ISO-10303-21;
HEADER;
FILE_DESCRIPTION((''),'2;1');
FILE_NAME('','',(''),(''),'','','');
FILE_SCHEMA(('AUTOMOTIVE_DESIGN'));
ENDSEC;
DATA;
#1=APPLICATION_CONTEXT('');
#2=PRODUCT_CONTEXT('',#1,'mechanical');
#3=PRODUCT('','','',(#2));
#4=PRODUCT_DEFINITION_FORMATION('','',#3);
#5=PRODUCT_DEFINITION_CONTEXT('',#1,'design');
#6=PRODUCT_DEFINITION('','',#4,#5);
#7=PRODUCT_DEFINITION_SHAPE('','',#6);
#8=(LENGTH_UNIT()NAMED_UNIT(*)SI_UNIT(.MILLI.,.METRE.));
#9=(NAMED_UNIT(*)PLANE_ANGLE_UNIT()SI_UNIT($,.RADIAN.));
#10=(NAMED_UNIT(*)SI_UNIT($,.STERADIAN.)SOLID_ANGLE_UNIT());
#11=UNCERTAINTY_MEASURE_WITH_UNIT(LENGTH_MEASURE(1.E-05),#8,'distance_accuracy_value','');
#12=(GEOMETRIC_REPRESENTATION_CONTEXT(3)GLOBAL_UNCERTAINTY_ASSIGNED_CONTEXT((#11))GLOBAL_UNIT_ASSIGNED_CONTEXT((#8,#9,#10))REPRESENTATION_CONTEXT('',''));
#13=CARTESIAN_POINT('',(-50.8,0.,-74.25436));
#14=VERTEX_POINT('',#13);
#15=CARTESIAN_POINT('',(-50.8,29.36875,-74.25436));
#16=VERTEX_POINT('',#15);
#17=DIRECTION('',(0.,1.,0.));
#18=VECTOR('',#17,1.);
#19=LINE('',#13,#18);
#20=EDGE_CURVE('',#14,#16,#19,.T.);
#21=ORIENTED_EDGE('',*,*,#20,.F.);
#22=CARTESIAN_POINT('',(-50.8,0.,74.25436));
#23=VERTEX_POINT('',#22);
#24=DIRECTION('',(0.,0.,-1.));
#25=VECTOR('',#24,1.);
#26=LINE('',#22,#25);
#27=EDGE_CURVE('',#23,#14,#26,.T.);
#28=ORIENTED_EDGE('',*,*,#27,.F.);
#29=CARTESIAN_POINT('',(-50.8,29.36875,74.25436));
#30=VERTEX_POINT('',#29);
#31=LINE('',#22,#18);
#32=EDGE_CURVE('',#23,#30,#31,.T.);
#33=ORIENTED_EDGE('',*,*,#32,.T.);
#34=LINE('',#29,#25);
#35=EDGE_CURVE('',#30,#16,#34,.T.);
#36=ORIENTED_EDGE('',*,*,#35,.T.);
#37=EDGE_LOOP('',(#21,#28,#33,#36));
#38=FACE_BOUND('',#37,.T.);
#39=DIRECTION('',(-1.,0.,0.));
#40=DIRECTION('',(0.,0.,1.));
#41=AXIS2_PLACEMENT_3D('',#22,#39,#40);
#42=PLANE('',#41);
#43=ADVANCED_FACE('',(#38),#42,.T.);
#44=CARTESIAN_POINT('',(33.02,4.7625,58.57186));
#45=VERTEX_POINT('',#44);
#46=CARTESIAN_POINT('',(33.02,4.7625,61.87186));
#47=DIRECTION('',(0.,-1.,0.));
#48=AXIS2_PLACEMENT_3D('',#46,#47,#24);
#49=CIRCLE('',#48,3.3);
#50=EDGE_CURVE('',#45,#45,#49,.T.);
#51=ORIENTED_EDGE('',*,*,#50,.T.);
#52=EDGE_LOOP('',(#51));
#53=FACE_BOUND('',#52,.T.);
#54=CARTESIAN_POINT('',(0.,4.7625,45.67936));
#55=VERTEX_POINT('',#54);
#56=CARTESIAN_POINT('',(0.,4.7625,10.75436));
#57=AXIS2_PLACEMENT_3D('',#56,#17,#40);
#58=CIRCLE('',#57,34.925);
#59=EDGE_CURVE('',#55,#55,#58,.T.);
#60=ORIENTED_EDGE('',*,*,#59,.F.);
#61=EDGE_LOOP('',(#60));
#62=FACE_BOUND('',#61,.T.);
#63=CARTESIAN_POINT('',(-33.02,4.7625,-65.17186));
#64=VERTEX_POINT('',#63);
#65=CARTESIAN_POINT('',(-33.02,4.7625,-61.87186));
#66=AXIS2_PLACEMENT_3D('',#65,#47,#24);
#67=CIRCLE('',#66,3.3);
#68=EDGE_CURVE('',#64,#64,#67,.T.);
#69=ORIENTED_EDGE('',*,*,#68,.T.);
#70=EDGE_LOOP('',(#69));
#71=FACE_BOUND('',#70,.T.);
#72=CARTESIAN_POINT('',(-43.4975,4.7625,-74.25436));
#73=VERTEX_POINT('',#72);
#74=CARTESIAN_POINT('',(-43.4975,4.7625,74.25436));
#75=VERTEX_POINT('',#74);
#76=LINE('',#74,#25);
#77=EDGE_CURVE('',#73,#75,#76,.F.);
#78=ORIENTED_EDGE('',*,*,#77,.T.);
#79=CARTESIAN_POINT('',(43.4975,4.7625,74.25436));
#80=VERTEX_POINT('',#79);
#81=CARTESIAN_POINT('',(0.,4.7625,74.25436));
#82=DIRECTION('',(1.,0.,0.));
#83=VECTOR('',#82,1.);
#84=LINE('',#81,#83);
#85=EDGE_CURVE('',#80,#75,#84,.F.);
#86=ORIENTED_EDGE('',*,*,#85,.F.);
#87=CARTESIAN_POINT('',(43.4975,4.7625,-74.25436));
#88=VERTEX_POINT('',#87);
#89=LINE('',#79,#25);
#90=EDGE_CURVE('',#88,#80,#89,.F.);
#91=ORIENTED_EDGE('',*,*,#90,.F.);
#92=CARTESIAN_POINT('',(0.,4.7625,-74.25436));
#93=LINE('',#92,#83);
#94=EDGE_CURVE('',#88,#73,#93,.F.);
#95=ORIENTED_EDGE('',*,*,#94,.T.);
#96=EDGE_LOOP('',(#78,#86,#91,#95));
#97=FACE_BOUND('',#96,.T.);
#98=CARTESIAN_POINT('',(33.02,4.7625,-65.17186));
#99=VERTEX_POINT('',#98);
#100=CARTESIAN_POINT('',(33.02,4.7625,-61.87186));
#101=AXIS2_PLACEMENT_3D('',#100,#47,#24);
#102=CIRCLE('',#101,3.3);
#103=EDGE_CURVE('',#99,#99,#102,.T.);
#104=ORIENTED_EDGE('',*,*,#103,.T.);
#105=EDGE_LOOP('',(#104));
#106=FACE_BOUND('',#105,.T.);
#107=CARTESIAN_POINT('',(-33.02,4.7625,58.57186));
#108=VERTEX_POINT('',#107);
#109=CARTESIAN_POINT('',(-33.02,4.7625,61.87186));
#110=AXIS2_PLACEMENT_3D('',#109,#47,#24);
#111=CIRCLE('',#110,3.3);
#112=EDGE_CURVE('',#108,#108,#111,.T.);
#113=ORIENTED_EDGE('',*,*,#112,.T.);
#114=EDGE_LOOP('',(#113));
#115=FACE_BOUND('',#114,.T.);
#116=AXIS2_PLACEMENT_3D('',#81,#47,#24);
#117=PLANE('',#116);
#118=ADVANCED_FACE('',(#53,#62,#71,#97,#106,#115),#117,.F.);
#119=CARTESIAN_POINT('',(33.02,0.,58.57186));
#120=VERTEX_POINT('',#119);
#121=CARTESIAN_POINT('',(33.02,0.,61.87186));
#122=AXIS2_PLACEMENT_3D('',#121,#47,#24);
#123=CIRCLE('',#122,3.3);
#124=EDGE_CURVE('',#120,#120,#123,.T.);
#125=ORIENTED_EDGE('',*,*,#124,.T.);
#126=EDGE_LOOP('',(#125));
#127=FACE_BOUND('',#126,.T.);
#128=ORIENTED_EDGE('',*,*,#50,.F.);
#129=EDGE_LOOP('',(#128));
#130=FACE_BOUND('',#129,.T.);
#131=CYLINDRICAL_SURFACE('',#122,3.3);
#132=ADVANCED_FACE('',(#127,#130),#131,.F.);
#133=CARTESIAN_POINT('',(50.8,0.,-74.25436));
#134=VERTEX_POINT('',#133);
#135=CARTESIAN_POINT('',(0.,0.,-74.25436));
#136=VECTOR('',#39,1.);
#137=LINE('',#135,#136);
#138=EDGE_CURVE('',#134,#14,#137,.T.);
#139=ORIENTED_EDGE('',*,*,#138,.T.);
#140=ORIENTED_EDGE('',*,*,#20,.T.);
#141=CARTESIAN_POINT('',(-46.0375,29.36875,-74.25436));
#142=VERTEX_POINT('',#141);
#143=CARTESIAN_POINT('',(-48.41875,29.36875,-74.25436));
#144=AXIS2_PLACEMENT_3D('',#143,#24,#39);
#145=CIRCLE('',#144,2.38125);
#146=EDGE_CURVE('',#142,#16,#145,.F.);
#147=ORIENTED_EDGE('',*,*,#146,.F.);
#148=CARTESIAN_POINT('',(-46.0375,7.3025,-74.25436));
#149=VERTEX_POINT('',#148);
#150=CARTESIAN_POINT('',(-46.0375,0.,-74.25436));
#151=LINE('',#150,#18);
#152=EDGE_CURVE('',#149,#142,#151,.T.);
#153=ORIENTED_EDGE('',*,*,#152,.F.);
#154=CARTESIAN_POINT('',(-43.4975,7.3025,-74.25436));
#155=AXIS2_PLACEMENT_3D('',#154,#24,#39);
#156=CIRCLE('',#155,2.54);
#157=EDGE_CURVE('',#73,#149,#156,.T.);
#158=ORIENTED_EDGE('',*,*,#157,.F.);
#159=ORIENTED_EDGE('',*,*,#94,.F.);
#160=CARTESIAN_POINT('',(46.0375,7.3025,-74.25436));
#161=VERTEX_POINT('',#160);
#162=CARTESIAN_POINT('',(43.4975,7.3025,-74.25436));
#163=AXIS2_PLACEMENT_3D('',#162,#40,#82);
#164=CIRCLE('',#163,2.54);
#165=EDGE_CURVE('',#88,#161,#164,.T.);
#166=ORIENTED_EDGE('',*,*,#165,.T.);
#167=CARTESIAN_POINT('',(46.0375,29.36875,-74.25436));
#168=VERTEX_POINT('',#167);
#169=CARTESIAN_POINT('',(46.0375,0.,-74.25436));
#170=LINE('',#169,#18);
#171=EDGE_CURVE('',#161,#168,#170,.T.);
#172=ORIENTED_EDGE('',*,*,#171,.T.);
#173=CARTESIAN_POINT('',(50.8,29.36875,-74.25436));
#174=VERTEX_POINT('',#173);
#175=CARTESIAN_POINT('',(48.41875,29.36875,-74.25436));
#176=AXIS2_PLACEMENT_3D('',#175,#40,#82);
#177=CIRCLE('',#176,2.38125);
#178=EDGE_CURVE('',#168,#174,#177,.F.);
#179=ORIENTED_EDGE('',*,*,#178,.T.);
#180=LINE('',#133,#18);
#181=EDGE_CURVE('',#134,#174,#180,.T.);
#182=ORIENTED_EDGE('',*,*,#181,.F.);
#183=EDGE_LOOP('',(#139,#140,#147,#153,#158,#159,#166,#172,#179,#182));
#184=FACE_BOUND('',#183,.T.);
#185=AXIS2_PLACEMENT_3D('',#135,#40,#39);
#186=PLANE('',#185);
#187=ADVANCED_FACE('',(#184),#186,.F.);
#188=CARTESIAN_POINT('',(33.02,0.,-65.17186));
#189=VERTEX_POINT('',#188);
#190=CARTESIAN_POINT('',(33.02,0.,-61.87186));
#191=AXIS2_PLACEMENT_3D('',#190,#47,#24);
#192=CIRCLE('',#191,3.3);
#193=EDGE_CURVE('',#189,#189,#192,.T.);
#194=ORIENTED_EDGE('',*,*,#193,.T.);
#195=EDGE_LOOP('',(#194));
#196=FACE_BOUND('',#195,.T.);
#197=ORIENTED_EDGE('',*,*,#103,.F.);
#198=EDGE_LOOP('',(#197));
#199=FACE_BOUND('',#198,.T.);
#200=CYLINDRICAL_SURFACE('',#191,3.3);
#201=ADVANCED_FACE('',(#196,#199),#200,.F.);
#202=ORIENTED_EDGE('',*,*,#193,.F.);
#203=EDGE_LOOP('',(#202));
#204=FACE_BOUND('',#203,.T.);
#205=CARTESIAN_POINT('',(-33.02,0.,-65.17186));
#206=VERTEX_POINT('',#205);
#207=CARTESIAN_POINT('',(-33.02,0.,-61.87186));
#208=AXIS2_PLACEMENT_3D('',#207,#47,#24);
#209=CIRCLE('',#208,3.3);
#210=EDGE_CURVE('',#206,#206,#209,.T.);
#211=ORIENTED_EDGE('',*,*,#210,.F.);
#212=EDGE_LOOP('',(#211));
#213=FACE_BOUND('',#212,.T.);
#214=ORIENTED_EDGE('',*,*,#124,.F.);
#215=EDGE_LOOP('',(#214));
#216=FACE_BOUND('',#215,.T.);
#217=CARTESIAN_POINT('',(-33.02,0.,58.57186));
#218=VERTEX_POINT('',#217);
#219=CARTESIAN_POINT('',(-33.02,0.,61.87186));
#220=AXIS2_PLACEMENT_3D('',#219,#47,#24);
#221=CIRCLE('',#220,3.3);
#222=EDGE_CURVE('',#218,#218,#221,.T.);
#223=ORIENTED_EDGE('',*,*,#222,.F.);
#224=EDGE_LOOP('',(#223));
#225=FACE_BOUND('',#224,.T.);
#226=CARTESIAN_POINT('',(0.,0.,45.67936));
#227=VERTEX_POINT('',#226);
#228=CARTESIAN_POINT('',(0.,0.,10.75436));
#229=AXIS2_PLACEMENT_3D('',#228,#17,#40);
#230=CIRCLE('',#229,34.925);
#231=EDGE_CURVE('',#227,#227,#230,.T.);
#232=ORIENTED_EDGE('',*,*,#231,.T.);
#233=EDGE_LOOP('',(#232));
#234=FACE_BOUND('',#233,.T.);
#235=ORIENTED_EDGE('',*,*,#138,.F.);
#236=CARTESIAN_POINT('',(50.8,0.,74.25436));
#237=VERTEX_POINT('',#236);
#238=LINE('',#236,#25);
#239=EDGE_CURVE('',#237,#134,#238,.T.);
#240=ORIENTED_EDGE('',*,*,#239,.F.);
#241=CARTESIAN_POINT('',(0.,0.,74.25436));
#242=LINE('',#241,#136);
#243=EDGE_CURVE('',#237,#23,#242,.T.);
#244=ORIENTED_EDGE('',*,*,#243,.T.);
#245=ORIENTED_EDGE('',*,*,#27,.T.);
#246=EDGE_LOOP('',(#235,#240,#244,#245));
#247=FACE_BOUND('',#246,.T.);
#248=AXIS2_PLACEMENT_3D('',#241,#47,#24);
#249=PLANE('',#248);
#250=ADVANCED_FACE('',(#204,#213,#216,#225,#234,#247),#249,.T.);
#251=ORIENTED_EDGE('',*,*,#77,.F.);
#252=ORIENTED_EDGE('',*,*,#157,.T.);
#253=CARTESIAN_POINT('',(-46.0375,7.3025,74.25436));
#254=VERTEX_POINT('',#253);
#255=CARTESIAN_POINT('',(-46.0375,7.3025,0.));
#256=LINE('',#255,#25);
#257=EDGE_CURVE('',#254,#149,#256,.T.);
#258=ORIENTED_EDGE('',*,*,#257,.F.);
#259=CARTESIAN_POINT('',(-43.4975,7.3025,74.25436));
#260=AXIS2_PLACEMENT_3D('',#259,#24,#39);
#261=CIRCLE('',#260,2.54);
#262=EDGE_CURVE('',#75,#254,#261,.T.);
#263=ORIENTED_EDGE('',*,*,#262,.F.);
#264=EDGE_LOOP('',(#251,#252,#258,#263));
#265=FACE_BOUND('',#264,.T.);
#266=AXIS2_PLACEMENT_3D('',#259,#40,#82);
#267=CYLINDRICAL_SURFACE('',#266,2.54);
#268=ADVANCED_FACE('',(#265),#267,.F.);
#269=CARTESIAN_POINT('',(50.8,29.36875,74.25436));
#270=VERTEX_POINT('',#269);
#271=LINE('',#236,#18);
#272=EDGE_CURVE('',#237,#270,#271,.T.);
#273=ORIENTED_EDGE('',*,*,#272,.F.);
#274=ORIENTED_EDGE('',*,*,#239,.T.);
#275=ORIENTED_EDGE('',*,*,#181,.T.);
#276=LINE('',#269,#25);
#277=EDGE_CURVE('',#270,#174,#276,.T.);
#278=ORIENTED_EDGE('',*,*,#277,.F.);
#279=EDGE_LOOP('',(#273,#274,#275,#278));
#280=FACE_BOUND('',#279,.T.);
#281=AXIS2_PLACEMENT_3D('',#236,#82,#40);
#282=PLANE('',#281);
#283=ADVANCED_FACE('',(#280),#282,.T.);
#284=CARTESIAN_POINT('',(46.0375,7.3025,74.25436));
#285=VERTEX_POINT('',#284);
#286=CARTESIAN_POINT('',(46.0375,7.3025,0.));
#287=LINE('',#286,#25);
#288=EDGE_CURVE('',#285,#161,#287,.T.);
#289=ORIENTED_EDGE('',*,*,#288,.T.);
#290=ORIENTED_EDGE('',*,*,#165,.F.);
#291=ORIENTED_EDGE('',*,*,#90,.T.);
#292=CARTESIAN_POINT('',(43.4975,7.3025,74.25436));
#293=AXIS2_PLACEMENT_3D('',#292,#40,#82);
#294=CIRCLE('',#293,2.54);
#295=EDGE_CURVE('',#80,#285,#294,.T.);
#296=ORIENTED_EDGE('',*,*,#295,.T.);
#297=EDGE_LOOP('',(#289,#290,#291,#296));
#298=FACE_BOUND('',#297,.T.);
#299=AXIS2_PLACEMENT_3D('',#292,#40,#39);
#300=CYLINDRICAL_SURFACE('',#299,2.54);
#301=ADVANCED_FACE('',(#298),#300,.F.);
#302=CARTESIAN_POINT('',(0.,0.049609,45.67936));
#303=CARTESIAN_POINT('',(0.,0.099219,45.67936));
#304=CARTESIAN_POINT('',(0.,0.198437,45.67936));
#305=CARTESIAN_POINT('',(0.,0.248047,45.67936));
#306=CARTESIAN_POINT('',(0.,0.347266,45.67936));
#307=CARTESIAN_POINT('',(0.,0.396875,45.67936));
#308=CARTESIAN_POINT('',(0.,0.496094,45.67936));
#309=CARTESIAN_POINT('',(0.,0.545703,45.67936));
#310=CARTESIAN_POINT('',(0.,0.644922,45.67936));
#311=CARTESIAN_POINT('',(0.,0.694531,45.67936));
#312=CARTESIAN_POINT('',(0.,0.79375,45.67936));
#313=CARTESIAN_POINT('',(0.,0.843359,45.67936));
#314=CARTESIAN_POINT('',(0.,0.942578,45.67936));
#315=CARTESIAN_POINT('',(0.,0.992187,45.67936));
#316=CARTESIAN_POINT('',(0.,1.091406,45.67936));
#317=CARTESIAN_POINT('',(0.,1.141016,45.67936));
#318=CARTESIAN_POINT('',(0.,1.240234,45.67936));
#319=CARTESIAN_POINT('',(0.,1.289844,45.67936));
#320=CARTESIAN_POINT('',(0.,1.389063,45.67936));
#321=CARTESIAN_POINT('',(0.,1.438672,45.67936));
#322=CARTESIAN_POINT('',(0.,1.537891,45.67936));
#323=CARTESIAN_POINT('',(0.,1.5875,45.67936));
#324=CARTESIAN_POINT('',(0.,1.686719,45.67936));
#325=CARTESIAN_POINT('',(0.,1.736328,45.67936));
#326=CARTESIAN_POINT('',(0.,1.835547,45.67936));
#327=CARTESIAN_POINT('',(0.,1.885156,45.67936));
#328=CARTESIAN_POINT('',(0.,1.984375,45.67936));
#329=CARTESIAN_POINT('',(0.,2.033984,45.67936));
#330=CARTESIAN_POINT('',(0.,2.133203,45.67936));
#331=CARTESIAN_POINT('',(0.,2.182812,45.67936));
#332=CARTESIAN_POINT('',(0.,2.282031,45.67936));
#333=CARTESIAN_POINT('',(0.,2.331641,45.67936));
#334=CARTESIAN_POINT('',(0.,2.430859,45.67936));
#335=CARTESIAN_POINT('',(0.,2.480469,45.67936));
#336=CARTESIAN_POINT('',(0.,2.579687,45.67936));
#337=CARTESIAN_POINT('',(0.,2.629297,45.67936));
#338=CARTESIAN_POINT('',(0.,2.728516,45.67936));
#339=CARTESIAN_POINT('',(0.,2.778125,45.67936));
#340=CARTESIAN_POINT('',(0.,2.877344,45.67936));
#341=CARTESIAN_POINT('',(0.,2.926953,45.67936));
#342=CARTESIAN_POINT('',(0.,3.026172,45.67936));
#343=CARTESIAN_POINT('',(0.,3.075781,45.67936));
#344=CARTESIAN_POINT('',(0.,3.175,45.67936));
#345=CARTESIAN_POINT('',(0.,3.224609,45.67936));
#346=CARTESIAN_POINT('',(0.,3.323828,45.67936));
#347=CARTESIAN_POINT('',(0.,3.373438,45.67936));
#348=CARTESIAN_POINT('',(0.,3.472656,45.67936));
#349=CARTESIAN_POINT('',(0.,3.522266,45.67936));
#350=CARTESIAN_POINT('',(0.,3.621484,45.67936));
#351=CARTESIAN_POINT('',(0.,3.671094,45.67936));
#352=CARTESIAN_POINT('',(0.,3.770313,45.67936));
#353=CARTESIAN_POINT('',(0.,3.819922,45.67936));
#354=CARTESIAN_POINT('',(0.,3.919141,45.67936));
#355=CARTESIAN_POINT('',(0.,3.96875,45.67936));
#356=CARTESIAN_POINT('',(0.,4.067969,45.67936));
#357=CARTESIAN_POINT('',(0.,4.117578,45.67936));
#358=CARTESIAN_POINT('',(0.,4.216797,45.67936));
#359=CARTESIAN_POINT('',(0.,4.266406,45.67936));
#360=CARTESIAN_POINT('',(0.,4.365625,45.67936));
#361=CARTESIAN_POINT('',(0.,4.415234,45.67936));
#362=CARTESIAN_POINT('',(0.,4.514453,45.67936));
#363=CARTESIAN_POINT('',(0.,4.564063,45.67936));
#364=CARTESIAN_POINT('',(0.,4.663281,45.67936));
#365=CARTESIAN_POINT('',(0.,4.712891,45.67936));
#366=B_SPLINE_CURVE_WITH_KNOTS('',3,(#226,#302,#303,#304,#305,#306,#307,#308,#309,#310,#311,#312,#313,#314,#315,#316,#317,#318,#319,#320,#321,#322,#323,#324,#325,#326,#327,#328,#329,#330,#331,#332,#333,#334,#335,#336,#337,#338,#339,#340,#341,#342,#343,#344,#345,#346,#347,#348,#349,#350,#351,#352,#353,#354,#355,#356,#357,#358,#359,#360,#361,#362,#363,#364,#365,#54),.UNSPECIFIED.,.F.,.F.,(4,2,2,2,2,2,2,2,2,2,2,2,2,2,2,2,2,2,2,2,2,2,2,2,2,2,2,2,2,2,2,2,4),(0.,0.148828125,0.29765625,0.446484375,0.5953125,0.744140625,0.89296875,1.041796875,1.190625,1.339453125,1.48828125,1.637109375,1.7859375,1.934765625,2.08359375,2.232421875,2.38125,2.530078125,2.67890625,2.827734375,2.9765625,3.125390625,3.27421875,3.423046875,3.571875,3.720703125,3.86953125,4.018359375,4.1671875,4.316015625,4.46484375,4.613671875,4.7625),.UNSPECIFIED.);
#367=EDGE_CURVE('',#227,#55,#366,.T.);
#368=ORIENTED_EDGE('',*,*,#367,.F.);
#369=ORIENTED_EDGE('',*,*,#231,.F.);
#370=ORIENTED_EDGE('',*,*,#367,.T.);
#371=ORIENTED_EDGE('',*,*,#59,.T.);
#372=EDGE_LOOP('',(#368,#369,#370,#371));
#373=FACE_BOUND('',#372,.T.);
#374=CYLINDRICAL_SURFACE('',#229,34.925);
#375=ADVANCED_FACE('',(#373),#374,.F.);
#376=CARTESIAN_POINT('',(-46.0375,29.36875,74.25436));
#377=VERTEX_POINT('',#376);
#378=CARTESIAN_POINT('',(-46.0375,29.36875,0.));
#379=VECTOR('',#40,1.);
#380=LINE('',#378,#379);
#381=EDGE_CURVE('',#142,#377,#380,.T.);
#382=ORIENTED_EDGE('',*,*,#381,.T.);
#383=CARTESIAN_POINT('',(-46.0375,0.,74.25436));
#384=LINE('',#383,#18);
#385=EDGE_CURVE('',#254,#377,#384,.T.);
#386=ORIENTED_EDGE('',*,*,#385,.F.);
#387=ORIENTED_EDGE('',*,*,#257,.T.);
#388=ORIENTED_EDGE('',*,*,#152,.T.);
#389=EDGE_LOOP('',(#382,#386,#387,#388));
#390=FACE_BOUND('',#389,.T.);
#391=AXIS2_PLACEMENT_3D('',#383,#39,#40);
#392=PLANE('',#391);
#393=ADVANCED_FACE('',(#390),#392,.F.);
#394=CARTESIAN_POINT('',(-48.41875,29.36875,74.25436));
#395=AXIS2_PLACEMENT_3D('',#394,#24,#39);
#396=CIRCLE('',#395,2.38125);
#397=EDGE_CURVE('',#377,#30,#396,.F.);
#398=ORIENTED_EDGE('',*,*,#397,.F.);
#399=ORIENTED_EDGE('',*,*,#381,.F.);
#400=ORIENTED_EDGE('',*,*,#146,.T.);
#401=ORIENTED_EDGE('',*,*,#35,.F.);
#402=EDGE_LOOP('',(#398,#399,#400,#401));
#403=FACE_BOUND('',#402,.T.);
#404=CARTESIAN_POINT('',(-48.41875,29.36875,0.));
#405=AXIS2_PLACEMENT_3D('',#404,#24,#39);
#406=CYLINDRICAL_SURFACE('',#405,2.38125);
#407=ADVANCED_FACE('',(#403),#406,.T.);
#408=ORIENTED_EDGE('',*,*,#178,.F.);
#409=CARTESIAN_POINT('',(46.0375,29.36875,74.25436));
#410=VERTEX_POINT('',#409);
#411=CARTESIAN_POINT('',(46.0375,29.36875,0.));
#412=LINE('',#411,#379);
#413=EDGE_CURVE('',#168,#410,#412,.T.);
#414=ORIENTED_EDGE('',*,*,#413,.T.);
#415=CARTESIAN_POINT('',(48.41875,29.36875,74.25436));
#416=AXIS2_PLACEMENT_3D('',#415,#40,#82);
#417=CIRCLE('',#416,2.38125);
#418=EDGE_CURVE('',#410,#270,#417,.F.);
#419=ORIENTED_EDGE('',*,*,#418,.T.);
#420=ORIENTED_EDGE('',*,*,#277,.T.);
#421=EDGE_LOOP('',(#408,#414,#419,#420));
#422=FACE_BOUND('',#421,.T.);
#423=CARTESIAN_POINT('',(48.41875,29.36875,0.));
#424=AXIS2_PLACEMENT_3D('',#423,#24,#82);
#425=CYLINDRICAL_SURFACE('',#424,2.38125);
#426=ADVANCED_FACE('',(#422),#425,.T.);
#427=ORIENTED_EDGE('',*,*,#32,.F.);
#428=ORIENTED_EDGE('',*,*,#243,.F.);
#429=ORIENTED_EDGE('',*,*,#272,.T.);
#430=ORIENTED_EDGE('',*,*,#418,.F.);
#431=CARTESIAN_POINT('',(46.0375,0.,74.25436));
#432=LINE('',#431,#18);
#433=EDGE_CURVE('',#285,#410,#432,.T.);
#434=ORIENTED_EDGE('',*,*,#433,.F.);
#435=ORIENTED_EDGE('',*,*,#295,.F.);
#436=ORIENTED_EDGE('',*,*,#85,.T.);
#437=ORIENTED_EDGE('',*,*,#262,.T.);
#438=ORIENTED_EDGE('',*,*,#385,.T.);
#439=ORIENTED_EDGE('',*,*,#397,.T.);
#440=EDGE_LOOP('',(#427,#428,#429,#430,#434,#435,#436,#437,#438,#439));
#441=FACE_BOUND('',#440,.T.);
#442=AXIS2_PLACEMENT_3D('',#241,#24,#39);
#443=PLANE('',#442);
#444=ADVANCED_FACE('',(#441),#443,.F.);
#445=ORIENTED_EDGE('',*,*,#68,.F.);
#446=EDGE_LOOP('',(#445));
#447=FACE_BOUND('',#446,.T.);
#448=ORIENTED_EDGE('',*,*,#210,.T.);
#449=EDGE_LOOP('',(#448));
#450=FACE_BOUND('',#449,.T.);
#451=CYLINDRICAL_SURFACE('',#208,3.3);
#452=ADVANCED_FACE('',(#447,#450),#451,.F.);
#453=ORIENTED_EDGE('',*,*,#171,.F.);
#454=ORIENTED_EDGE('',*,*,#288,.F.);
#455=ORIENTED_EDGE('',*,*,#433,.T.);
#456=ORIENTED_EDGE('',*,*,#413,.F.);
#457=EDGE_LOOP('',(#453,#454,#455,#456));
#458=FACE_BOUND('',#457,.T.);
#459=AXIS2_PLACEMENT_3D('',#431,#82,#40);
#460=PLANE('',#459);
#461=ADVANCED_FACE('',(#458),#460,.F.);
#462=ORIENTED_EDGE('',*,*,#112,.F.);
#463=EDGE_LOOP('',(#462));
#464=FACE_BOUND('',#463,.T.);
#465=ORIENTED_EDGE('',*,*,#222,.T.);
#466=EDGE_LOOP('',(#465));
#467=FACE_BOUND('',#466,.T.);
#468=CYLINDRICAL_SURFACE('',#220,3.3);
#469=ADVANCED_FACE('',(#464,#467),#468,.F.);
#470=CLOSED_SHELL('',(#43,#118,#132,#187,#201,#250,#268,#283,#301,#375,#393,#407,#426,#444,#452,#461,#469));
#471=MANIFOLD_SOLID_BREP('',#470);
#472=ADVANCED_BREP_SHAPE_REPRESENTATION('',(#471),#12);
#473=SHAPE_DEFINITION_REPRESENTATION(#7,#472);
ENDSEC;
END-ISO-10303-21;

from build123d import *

# Parameters (mm, degrees)
EXTRUDE_THIN1_DEPTH  = 74.25436
FILLET1_RADIUS       = 2.38125
FILLET1_LENGTH       = 74.25436
FILLET2_R            = 2.54
MIRROR1_START        = -74.25436
MIRROR1_DEPTH        = 148.50872
M6_CLEARANCE_HOLE1_D = 6.6
SKETCH11_R           = 34.925
CUT_EXTRUDE4_DEPTH   = 94.929096319


# Read off the part's stored shape, not the designer's step: Mirror1
with BuildPart() as part:
    # Sketch4 → Extrude-Thin1 (new body)
    with BuildSketch(Plane.XY):
        Polygon((0, 0), (-50.8, 0), (-50.8, 31.75), (-46.0375, 31.75), (-46.0375, 4.7625), (0, 4.7625), align=None)
    extrude(amount=EXTRUDE_THIN1_DEPTH)

    # Fillet1: full round fillet: the end face becomes a half cylinder, R = half its width
    fillet1_face = Plane((-48.41875, 31.75, 37.12718), x_dir=(0, 0, -1), z_dir=(0, 1, 0))  # on the end face: x along it, z out of the body
    fillet1_slab = fillet1_face.offset(-FILLET1_RADIUS / 2) * Box(FILLET1_LENGTH, 2 * FILLET1_RADIUS, FILLET1_RADIUS, mode=Mode.PRIVATE)  # the body's end, R deep
    fillet1_round = Plane((-48.41875, 29.36875, 37.12718), x_dir=(0, 1, 0), z_dir=(0, 0, -1)) * Cylinder(FILLET1_RADIUS, FILLET1_LENGTH, mode=Mode.PRIVATE)  # its axis R under the face
    add(fillet1_slab - fillet1_round, mode=Mode.SUBTRACT)

    # Fillet2
    fillet2_edges = [part.edges().sort_by_distance(p)[0] for p in [
        (-46.0375, 4.7625, 37.12718),
    ]]
    fillet(fillet2_edges, radius=FILLET2_R)

    # Mirror1 outline → Mirror1 (add)
    with BuildSketch(Plane.XY.offset(MIRROR1_START)):
        with BuildLine():
            ThreePointArc((-46.0375, 29.36875), (-48.41875, 31.75), (-50.8, 29.36875))
            Line((-50.8, 29.36875), (-50.8, 0))
            Line((-50.8, 0), (50.8, 0))
            Line((50.8, 0), (50.8, 29.36875))
            ThreePointArc((50.8, 29.36875), (48.41875, 31.75), (46.0375, 29.36875))
            Line((46.0375, 29.36875), (46.0375, 7.3025))
            ThreePointArc((46.0375, 7.3025), (45.293551224, 5.506448776), (43.4975, 4.7625))
            Line((43.4975, 4.7625), (-43.4975, 4.7625))
            ThreePointArc((-43.4975, 4.7625), (-45.293551224, 5.506448776), (-46.0375, 7.3025))
            Line((-46.0375, 7.3025), (-46.0375, 29.36875))
        make_face()
    extrude(amount=MIRROR1_DEPTH)

    # M6 Clearance Hole1 (through all)
    with Locations(Plane(origin=(-33.02, 0, 61.87186), x_dir=(0, 0, -1), z_dir=(0, -1, 0))):
        with Locations((0, 0), (0, 66.04), (123.74372, 0), (123.74372, 66.04)):
            Hole(M6_CLEARANCE_HOLE1_D / 2)

    # Sketch11 → Cut-Extrude4 (cut, through all)
    with BuildSketch(Plane(origin=(0, 4.7625, 0), x_dir=(1, 0, 0), z_dir=(0, 1, 0))):
        with Locations(Location((0, -10.75436, 0), (0, 0, 270))):
            Circle(SKETCH11_R)
    extrude(amount=-CUT_EXTRUDE4_DEPTH, mode=Mode.SUBTRACT)


solid = part.part
